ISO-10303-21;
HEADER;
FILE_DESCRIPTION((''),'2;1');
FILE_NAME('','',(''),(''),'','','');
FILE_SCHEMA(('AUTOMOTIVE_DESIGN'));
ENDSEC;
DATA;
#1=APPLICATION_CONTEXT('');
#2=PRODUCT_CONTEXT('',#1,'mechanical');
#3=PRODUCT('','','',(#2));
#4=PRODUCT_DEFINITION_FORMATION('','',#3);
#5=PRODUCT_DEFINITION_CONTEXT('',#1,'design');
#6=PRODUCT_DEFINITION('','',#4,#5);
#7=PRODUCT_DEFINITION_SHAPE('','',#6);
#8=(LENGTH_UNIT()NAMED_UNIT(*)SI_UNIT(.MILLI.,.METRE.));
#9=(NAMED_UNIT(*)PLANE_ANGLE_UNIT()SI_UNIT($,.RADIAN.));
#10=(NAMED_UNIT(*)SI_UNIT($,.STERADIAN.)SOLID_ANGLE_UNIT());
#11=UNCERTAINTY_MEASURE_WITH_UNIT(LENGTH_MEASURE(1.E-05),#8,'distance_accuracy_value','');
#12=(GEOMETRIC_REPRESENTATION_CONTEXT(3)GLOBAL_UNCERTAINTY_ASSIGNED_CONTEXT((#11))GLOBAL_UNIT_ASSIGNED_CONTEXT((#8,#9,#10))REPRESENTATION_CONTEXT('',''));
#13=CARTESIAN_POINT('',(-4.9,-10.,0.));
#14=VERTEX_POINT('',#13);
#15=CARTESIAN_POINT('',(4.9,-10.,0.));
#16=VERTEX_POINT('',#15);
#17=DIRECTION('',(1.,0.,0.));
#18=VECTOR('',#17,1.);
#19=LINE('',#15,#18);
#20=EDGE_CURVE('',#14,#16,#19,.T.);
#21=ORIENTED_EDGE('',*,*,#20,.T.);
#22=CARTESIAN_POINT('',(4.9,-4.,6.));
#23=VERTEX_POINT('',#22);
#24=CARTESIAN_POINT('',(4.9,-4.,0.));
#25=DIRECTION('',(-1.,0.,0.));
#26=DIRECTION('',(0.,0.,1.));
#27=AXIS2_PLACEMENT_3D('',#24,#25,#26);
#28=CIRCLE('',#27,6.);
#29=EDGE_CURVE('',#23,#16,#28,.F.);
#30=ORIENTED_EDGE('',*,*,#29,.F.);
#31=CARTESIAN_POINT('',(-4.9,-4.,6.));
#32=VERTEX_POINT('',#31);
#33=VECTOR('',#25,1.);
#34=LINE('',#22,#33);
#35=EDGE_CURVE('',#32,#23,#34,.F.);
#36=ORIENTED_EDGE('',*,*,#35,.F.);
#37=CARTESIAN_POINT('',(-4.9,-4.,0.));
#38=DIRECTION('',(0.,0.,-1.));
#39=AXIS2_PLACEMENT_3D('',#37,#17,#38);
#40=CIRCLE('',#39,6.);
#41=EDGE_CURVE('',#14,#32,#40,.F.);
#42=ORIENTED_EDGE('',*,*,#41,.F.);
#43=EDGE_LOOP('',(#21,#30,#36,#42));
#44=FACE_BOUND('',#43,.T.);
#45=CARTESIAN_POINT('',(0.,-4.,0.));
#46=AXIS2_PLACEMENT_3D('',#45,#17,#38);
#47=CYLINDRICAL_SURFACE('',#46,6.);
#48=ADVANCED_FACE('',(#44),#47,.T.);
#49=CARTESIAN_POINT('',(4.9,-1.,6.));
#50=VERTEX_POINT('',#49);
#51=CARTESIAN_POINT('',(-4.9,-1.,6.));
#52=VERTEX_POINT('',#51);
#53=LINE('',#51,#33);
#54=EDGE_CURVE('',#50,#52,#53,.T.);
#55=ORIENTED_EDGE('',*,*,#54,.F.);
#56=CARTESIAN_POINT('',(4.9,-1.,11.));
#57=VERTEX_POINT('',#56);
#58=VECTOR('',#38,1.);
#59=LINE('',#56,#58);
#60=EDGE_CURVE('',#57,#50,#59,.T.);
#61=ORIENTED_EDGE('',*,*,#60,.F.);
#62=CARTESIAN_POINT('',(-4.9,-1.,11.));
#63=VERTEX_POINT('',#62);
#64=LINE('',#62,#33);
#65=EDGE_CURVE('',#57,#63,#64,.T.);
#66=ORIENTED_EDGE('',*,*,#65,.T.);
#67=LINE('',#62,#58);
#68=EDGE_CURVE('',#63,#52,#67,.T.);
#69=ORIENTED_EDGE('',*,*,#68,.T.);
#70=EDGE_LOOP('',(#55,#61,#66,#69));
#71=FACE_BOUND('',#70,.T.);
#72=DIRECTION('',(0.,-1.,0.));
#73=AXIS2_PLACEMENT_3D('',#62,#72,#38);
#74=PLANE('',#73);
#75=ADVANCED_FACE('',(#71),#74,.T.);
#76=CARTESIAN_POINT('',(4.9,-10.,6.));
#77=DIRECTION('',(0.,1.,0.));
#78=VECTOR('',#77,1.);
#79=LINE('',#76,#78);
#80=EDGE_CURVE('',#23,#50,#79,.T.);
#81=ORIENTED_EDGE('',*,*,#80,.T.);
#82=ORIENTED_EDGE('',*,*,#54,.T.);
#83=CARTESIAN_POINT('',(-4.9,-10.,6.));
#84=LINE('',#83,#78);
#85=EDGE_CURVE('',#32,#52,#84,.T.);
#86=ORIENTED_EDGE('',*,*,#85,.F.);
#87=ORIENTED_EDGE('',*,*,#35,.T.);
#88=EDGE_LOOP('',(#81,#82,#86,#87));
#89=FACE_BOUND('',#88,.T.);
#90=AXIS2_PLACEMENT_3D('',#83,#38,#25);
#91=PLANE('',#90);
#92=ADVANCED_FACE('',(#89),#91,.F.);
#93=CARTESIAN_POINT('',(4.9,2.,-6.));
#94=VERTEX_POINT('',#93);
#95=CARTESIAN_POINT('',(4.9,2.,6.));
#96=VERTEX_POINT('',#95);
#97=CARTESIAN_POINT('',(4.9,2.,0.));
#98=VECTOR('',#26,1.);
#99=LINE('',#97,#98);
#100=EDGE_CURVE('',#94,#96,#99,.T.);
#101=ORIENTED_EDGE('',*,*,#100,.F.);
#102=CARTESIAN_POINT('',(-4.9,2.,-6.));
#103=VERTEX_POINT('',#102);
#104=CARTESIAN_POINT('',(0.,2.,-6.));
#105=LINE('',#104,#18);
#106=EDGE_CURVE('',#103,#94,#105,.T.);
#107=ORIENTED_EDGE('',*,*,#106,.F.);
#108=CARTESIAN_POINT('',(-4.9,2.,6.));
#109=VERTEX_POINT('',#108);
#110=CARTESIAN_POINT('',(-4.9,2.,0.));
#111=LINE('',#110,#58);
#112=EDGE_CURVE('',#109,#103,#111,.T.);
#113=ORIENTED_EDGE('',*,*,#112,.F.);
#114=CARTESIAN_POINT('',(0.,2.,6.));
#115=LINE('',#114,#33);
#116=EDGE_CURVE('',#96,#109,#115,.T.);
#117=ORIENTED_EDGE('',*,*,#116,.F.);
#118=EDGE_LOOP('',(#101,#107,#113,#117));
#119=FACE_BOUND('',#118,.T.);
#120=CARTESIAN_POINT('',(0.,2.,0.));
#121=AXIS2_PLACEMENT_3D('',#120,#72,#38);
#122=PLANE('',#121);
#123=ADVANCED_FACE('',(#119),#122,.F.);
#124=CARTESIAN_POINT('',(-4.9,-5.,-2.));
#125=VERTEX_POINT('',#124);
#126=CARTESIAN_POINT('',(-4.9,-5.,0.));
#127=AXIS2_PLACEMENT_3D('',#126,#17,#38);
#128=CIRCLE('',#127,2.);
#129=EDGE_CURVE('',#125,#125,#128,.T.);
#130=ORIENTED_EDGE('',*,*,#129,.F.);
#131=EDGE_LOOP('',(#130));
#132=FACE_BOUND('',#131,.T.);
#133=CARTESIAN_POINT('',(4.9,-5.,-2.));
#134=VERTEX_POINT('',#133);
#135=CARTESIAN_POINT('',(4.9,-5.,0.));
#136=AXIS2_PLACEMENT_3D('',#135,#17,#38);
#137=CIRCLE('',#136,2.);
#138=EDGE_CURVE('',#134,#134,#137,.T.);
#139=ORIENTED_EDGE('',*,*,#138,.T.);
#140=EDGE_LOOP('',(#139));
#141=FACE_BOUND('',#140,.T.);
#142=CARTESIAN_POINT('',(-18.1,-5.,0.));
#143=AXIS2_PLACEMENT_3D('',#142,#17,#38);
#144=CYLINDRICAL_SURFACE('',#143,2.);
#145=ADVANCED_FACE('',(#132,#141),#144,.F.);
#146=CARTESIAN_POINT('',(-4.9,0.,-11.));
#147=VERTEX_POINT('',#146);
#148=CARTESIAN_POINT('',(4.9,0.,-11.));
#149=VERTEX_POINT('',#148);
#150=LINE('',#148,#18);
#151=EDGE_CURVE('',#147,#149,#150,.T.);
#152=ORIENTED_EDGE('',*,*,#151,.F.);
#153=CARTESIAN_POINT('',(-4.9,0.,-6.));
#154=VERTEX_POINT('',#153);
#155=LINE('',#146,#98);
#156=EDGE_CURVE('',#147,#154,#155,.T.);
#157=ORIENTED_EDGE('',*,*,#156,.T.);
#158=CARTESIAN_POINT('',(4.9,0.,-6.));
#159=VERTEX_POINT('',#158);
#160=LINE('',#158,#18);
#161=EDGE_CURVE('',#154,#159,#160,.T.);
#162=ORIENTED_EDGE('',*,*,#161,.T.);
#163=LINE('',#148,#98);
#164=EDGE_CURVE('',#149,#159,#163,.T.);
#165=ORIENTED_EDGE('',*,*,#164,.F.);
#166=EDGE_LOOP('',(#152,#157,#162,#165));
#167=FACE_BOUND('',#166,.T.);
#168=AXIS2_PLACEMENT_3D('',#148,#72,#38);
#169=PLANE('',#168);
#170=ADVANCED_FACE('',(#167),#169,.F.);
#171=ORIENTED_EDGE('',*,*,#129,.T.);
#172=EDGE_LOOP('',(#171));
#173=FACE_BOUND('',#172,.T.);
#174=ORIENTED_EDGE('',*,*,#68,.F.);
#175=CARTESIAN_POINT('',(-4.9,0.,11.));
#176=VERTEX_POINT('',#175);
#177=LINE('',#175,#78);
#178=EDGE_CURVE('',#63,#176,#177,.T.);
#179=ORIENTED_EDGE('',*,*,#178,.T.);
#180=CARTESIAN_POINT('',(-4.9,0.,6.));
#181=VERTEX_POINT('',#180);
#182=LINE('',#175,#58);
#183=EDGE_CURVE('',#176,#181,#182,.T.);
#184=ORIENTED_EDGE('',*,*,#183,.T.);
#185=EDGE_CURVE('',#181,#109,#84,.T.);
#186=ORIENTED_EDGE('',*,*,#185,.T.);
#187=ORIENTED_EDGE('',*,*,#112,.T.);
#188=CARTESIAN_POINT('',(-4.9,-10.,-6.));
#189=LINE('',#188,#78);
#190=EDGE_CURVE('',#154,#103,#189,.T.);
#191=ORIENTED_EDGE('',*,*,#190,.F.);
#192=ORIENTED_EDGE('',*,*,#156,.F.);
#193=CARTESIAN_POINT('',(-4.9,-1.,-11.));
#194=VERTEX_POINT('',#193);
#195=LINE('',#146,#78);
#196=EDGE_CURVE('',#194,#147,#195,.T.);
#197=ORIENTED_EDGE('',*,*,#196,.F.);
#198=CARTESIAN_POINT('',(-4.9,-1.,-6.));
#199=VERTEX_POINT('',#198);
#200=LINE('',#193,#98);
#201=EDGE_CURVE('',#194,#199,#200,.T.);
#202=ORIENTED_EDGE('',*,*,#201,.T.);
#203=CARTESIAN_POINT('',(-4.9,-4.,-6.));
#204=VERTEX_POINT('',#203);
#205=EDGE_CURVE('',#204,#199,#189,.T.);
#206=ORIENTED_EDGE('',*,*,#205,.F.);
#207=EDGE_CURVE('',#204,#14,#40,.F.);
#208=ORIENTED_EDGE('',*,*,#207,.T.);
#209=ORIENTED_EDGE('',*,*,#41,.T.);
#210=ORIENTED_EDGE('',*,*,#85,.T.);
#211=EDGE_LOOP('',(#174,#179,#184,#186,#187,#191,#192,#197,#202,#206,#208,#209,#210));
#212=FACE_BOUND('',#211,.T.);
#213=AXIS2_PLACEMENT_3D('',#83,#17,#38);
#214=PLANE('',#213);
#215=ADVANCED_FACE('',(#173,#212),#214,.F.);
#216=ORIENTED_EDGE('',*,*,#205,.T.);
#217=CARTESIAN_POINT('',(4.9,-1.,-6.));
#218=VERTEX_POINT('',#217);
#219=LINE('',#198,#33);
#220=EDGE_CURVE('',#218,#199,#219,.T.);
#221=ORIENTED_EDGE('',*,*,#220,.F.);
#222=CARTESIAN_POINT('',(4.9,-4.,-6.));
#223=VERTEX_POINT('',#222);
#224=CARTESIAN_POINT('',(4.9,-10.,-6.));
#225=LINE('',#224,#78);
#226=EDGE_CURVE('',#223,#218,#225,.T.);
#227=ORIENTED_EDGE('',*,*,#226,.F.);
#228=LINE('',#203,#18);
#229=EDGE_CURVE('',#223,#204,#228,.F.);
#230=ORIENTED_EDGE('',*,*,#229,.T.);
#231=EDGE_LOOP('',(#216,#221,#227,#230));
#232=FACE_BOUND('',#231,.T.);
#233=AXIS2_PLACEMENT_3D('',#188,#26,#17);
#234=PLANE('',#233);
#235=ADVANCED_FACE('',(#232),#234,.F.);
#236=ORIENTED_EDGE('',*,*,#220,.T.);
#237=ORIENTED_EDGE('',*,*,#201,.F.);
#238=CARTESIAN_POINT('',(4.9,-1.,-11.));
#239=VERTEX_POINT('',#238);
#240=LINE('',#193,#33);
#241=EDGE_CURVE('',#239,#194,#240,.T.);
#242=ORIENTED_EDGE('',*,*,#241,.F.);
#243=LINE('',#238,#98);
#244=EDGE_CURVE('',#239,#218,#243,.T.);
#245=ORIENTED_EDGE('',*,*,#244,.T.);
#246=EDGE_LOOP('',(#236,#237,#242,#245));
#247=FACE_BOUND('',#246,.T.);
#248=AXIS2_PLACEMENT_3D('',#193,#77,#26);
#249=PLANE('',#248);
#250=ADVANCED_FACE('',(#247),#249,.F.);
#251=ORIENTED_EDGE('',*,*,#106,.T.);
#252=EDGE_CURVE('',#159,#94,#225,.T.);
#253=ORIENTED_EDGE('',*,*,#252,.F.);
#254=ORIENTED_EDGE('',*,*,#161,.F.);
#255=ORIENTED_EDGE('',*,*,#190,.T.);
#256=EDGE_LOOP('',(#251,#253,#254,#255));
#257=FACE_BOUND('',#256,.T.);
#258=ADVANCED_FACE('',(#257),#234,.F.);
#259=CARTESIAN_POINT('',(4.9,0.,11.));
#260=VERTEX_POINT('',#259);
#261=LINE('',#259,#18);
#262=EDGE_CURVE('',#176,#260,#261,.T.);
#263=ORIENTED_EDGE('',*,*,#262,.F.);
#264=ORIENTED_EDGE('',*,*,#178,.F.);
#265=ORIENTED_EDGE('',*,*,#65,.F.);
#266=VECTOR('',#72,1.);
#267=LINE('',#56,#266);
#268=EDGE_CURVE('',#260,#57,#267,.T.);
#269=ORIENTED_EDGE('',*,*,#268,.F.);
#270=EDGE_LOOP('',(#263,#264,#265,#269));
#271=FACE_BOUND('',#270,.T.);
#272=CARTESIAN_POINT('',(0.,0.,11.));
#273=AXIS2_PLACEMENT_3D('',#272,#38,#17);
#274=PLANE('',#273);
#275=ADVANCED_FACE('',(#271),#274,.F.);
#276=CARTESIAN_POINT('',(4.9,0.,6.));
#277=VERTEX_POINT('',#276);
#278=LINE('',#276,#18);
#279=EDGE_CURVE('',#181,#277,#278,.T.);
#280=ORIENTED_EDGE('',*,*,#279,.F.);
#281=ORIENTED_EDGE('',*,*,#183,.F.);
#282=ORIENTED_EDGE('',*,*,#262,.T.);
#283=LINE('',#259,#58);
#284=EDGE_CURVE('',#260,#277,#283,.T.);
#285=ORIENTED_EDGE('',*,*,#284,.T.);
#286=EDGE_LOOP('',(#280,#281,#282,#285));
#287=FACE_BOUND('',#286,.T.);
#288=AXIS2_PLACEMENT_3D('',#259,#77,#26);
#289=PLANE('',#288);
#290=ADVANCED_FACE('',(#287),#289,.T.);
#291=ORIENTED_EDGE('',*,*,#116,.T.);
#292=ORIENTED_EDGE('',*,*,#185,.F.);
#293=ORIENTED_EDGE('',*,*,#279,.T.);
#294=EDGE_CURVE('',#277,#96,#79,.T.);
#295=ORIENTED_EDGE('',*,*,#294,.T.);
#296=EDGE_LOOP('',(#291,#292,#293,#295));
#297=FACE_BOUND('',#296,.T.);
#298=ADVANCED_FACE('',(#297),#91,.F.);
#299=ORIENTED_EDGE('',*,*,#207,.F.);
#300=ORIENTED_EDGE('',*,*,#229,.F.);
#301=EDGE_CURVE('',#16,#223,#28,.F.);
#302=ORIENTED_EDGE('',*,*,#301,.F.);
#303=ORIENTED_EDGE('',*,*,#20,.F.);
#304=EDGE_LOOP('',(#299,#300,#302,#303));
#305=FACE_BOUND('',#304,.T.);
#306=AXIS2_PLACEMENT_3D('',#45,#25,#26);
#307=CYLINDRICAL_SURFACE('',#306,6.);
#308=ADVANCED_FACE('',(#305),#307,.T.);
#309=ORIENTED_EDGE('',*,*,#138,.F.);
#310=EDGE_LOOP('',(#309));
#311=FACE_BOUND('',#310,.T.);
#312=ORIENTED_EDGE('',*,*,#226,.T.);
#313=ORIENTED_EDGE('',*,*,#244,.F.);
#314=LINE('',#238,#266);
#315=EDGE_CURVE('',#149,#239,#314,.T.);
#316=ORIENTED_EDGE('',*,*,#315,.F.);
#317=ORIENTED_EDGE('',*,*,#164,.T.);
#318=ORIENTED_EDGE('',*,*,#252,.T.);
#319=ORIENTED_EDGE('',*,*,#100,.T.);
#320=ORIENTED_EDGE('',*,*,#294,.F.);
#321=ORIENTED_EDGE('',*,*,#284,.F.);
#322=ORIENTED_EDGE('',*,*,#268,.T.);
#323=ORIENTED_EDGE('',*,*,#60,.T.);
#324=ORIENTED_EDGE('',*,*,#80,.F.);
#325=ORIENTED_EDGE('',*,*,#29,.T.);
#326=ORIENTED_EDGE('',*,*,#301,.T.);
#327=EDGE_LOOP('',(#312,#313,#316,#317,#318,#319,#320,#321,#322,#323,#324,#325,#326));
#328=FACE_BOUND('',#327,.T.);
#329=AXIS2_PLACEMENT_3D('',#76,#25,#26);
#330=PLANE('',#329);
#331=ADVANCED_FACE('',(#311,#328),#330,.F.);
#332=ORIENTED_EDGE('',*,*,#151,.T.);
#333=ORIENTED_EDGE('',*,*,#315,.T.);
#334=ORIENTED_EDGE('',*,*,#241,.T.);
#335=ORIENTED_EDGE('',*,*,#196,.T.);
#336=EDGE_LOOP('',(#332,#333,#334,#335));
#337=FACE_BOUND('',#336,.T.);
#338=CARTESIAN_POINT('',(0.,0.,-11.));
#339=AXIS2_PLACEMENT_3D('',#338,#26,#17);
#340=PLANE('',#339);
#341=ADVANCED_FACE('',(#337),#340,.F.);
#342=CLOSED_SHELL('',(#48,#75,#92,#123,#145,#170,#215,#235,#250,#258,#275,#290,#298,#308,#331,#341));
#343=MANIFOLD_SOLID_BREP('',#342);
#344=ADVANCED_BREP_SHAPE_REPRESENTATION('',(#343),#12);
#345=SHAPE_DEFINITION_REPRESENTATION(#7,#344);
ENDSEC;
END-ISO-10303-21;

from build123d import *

# Parameters (mm, degrees)
SKETCH1_W                    = 99
SKETCH1_H                    = 25
SKETCH1_W_2                  = 93
SKETCH1_H_2                  = 19
BOSS_EXTRUDE1_DEPTH          = 10
SKETCH2_R                    = 40
CUT_EXTRUDE1_DEPTH           = 8
SKETCH5_W                    = 10
SKETCH5_H                    = 25
BOSS_EXTRUDE5_DEPTH          = 2
SKETCH6_W                    = 6
SKETCH6_H                    = 19
BOSS_EXTRUDE6_DEPTH          = 2
SKETCH7_W                    = 8
SKETCH7_H                    = 3
BOSS_EXTRUDE7_DEPTH          = 30
FILLET5_R                    = 3
FILLET7_R                    = 5
FILLET8_R                    = 20
FILLET9_R                    = 1.5
FILLET10_R                   = 6
FILLET11_R                   = 3
SKETCH8_W                    = 20
SKETCH8_H                    = 25
BOSS_EXTRUDE8_DEPTH          = 2
SKETCH9_W                    = 9.8
SKETCH9_H                    = 12
BOSS_EXTRUDE9_DEPTH          = 10
SKETCH10_R                   = 2
CUT_EXTRUDE2_DEPTH           = 23
FILLET12_R                   = 6
CUT_EXTRUDE_THIN1_DEPTH      = 65.857536204
CUT_EXTRUDE_THIN1_DEPTH_BACK = 65.857536204
SKETCH11_W                   = 109.8
SKETCH11_H                   = 112
SKETCH11_W_2                 = 9.8
SKETCH11_H_2                 = 12
SKETCH12_W                   = 9.8
SKETCH12_H                   = 1
BOSS_EXTRUDE10_DEPTH         = 5


with BuildPart() as part:
    # Sketch1 → Boss-Extrude1 (new body)
    with BuildSketch(Plane(origin=(0, 0, 0), x_dir=(1, 0, 0), z_dir=(0, 1, 0))):
        Rectangle(SKETCH1_W, SKETCH1_H)
        Rectangle(SKETCH1_W_2, SKETCH1_H_2, mode=Mode.SUBTRACT)
    extrude(amount=BOSS_EXTRUDE1_DEPTH)

    # Sketch2 → Cut-Extrude1 (cut)
    with BuildSketch(Plane.XY.offset(12.5)):
        with Locations((21.780912994, 42.853113242)):
            Circle(SKETCH2_R)
    extrude(amount=-CUT_EXTRUDE1_DEPTH, mode=Mode.SUBTRACT)

    # Sketch5 → Boss-Extrude5 (add)
    with BuildSketch(Plane.XZ):
        with Locations((-29.5, 0)):
            Rectangle(SKETCH5_W, SKETCH5_H)
    extrude(amount=-BOSS_EXTRUDE5_DEPTH)

    # Sketch6 → Boss-Extrude6 (add)
    with BuildSketch(Plane.XZ):
        with Locations((43.5, 0)):
            Rectangle(SKETCH6_W, SKETCH6_H)
    extrude(amount=-BOSS_EXTRUDE6_DEPTH)

    # Sketch7 → Boss-Extrude7 (add)
    with BuildSketch(Plane(origin=(0, 10, 0), x_dir=(1, 0, 0), z_dir=(0, 1, 0))):
        with Locations((-32.5, -11)):
            Rectangle(SKETCH7_W, SKETCH7_H)
    extrude(amount=BOSS_EXTRUDE7_DEPTH)

    # Fillet5
    fillet5_edges = [part.edges().sort_by_distance(p)[0] for p in [
        (-34.5, 1, 9.5),
        (-24.5, 1, 9.5),
        (-24.5, 1, -9.5),
        (-34.5, 1, -9.5),
        (40.5, 1, -9.5),
        (40.5, 1, 9.5),
    ]]
    fillet(fillet5_edges, radius=FILLET5_R)

    # Fillet7
    fillet7_edges = [part.edges().sort_by_distance(p)[0] for p in [
        (44.599172136, 10, 11),
    ]]
    fillet(fillet7_edges, radius=FILLET7_R)

    # Fillet8
    fillet8_edges = [part.edges().sort_by_distance(p)[0] for p in [
        (-1.037346149, 10, 11),
    ]]
    fillet(fillet8_edges, radius=FILLET8_R)

    # Fillet9
    fillet9_edges = [part.edges().sort_by_distance(p)[0] for p in [
        (46.5, 6, 9.5),
        (46.5, 6, -9.5),
        (-46.5, 5, -9.5),
        (-46.5, 5, 9.5),
        (-49.5, 5, 12.5),
        (-49.5, 5, -12.5),
        (49.5, 5, -12.5),
        (49.5, 5, 12.5),
    ]]
    fillet(fillet9_edges, radius=FILLET9_R)

    # Fillet10
    fillet10_edges = [part.edges().sort_by_distance(p)[0] for p in [
        (-36.5, 10, 11),
        (-28.5, 10, 11),
    ]]
    fillet(fillet10_edges, radius=FILLET10_R)

    # Fillet11
    fillet11_edges = [part.edges().sort_by_distance(p)[0] for p in [
        (-36.5, 40, 11),
        (-28.5, 40, 11),
    ]]
    fillet(fillet11_edges, radius=FILLET11_R)

    # Sketch8 → Boss-Extrude8 (add)
    with BuildSketch(Plane.XZ):
        Rectangle(SKETCH8_W, SKETCH8_H)
    extrude(amount=-BOSS_EXTRUDE8_DEPTH)

    # Sketch9 → Boss-Extrude9 (add)
    with BuildSketch(Plane.XZ):
        Rectangle(SKETCH9_W, SKETCH9_H)
    extrude(amount=BOSS_EXTRUDE9_DEPTH)

    # Sketch10 → Cut-Extrude2 (cut)
    with BuildSketch(Plane(origin=(4.9, 0, 0), x_dir=(0, 0, -1), z_dir=(1, 0, 0))):
        with Locations((0, -5)):
            Circle(SKETCH10_R)
    extrude(amount=-CUT_EXTRUDE2_DEPTH, mode=Mode.SUBTRACT)

    # Fillet12
    fillet12_edges = [part.edges().sort_by_distance(p)[0] for p in [
        (0, -10, 6),
        (0, -10, -6),
    ]]
    fillet(fillet12_edges, radius=FILLET12_R - 0.0001)  # a hair under: the kernel refuses the full size

    # Sketch11 → Cut-Extrude-Thin1 (cut, two sides: drawn at the far end of the back side and taken through both)
    with BuildSketch(Plane.XZ.offset(-CUT_EXTRUDE_THIN1_DEPTH_BACK)):
        Rectangle(SKETCH11_W, SKETCH11_H)
        Rectangle(SKETCH11_W_2, SKETCH11_H_2, mode=Mode.SUBTRACT)
    extrude(amount=CUT_EXTRUDE_THIN1_DEPTH + CUT_EXTRUDE_THIN1_DEPTH_BACK, mode=Mode.SUBTRACT)

    # Sketch12 → Boss-Extrude10 (add)
    with BuildSketch(Plane(origin=(0, 0, -6), x_dir=(-1, 0, 0), z_dir=(0, 0, -1))):
        with Locations((0, -0.5)):
            Rectangle(SKETCH12_W, SKETCH12_H)
    boss_extrude10 = extrude(amount=BOSS_EXTRUDE10_DEPTH)

    # Mirror1: Boss-Extrude10 across plane
    add(boss_extrude10.mirror(Plane.XY))


solid = part.part
